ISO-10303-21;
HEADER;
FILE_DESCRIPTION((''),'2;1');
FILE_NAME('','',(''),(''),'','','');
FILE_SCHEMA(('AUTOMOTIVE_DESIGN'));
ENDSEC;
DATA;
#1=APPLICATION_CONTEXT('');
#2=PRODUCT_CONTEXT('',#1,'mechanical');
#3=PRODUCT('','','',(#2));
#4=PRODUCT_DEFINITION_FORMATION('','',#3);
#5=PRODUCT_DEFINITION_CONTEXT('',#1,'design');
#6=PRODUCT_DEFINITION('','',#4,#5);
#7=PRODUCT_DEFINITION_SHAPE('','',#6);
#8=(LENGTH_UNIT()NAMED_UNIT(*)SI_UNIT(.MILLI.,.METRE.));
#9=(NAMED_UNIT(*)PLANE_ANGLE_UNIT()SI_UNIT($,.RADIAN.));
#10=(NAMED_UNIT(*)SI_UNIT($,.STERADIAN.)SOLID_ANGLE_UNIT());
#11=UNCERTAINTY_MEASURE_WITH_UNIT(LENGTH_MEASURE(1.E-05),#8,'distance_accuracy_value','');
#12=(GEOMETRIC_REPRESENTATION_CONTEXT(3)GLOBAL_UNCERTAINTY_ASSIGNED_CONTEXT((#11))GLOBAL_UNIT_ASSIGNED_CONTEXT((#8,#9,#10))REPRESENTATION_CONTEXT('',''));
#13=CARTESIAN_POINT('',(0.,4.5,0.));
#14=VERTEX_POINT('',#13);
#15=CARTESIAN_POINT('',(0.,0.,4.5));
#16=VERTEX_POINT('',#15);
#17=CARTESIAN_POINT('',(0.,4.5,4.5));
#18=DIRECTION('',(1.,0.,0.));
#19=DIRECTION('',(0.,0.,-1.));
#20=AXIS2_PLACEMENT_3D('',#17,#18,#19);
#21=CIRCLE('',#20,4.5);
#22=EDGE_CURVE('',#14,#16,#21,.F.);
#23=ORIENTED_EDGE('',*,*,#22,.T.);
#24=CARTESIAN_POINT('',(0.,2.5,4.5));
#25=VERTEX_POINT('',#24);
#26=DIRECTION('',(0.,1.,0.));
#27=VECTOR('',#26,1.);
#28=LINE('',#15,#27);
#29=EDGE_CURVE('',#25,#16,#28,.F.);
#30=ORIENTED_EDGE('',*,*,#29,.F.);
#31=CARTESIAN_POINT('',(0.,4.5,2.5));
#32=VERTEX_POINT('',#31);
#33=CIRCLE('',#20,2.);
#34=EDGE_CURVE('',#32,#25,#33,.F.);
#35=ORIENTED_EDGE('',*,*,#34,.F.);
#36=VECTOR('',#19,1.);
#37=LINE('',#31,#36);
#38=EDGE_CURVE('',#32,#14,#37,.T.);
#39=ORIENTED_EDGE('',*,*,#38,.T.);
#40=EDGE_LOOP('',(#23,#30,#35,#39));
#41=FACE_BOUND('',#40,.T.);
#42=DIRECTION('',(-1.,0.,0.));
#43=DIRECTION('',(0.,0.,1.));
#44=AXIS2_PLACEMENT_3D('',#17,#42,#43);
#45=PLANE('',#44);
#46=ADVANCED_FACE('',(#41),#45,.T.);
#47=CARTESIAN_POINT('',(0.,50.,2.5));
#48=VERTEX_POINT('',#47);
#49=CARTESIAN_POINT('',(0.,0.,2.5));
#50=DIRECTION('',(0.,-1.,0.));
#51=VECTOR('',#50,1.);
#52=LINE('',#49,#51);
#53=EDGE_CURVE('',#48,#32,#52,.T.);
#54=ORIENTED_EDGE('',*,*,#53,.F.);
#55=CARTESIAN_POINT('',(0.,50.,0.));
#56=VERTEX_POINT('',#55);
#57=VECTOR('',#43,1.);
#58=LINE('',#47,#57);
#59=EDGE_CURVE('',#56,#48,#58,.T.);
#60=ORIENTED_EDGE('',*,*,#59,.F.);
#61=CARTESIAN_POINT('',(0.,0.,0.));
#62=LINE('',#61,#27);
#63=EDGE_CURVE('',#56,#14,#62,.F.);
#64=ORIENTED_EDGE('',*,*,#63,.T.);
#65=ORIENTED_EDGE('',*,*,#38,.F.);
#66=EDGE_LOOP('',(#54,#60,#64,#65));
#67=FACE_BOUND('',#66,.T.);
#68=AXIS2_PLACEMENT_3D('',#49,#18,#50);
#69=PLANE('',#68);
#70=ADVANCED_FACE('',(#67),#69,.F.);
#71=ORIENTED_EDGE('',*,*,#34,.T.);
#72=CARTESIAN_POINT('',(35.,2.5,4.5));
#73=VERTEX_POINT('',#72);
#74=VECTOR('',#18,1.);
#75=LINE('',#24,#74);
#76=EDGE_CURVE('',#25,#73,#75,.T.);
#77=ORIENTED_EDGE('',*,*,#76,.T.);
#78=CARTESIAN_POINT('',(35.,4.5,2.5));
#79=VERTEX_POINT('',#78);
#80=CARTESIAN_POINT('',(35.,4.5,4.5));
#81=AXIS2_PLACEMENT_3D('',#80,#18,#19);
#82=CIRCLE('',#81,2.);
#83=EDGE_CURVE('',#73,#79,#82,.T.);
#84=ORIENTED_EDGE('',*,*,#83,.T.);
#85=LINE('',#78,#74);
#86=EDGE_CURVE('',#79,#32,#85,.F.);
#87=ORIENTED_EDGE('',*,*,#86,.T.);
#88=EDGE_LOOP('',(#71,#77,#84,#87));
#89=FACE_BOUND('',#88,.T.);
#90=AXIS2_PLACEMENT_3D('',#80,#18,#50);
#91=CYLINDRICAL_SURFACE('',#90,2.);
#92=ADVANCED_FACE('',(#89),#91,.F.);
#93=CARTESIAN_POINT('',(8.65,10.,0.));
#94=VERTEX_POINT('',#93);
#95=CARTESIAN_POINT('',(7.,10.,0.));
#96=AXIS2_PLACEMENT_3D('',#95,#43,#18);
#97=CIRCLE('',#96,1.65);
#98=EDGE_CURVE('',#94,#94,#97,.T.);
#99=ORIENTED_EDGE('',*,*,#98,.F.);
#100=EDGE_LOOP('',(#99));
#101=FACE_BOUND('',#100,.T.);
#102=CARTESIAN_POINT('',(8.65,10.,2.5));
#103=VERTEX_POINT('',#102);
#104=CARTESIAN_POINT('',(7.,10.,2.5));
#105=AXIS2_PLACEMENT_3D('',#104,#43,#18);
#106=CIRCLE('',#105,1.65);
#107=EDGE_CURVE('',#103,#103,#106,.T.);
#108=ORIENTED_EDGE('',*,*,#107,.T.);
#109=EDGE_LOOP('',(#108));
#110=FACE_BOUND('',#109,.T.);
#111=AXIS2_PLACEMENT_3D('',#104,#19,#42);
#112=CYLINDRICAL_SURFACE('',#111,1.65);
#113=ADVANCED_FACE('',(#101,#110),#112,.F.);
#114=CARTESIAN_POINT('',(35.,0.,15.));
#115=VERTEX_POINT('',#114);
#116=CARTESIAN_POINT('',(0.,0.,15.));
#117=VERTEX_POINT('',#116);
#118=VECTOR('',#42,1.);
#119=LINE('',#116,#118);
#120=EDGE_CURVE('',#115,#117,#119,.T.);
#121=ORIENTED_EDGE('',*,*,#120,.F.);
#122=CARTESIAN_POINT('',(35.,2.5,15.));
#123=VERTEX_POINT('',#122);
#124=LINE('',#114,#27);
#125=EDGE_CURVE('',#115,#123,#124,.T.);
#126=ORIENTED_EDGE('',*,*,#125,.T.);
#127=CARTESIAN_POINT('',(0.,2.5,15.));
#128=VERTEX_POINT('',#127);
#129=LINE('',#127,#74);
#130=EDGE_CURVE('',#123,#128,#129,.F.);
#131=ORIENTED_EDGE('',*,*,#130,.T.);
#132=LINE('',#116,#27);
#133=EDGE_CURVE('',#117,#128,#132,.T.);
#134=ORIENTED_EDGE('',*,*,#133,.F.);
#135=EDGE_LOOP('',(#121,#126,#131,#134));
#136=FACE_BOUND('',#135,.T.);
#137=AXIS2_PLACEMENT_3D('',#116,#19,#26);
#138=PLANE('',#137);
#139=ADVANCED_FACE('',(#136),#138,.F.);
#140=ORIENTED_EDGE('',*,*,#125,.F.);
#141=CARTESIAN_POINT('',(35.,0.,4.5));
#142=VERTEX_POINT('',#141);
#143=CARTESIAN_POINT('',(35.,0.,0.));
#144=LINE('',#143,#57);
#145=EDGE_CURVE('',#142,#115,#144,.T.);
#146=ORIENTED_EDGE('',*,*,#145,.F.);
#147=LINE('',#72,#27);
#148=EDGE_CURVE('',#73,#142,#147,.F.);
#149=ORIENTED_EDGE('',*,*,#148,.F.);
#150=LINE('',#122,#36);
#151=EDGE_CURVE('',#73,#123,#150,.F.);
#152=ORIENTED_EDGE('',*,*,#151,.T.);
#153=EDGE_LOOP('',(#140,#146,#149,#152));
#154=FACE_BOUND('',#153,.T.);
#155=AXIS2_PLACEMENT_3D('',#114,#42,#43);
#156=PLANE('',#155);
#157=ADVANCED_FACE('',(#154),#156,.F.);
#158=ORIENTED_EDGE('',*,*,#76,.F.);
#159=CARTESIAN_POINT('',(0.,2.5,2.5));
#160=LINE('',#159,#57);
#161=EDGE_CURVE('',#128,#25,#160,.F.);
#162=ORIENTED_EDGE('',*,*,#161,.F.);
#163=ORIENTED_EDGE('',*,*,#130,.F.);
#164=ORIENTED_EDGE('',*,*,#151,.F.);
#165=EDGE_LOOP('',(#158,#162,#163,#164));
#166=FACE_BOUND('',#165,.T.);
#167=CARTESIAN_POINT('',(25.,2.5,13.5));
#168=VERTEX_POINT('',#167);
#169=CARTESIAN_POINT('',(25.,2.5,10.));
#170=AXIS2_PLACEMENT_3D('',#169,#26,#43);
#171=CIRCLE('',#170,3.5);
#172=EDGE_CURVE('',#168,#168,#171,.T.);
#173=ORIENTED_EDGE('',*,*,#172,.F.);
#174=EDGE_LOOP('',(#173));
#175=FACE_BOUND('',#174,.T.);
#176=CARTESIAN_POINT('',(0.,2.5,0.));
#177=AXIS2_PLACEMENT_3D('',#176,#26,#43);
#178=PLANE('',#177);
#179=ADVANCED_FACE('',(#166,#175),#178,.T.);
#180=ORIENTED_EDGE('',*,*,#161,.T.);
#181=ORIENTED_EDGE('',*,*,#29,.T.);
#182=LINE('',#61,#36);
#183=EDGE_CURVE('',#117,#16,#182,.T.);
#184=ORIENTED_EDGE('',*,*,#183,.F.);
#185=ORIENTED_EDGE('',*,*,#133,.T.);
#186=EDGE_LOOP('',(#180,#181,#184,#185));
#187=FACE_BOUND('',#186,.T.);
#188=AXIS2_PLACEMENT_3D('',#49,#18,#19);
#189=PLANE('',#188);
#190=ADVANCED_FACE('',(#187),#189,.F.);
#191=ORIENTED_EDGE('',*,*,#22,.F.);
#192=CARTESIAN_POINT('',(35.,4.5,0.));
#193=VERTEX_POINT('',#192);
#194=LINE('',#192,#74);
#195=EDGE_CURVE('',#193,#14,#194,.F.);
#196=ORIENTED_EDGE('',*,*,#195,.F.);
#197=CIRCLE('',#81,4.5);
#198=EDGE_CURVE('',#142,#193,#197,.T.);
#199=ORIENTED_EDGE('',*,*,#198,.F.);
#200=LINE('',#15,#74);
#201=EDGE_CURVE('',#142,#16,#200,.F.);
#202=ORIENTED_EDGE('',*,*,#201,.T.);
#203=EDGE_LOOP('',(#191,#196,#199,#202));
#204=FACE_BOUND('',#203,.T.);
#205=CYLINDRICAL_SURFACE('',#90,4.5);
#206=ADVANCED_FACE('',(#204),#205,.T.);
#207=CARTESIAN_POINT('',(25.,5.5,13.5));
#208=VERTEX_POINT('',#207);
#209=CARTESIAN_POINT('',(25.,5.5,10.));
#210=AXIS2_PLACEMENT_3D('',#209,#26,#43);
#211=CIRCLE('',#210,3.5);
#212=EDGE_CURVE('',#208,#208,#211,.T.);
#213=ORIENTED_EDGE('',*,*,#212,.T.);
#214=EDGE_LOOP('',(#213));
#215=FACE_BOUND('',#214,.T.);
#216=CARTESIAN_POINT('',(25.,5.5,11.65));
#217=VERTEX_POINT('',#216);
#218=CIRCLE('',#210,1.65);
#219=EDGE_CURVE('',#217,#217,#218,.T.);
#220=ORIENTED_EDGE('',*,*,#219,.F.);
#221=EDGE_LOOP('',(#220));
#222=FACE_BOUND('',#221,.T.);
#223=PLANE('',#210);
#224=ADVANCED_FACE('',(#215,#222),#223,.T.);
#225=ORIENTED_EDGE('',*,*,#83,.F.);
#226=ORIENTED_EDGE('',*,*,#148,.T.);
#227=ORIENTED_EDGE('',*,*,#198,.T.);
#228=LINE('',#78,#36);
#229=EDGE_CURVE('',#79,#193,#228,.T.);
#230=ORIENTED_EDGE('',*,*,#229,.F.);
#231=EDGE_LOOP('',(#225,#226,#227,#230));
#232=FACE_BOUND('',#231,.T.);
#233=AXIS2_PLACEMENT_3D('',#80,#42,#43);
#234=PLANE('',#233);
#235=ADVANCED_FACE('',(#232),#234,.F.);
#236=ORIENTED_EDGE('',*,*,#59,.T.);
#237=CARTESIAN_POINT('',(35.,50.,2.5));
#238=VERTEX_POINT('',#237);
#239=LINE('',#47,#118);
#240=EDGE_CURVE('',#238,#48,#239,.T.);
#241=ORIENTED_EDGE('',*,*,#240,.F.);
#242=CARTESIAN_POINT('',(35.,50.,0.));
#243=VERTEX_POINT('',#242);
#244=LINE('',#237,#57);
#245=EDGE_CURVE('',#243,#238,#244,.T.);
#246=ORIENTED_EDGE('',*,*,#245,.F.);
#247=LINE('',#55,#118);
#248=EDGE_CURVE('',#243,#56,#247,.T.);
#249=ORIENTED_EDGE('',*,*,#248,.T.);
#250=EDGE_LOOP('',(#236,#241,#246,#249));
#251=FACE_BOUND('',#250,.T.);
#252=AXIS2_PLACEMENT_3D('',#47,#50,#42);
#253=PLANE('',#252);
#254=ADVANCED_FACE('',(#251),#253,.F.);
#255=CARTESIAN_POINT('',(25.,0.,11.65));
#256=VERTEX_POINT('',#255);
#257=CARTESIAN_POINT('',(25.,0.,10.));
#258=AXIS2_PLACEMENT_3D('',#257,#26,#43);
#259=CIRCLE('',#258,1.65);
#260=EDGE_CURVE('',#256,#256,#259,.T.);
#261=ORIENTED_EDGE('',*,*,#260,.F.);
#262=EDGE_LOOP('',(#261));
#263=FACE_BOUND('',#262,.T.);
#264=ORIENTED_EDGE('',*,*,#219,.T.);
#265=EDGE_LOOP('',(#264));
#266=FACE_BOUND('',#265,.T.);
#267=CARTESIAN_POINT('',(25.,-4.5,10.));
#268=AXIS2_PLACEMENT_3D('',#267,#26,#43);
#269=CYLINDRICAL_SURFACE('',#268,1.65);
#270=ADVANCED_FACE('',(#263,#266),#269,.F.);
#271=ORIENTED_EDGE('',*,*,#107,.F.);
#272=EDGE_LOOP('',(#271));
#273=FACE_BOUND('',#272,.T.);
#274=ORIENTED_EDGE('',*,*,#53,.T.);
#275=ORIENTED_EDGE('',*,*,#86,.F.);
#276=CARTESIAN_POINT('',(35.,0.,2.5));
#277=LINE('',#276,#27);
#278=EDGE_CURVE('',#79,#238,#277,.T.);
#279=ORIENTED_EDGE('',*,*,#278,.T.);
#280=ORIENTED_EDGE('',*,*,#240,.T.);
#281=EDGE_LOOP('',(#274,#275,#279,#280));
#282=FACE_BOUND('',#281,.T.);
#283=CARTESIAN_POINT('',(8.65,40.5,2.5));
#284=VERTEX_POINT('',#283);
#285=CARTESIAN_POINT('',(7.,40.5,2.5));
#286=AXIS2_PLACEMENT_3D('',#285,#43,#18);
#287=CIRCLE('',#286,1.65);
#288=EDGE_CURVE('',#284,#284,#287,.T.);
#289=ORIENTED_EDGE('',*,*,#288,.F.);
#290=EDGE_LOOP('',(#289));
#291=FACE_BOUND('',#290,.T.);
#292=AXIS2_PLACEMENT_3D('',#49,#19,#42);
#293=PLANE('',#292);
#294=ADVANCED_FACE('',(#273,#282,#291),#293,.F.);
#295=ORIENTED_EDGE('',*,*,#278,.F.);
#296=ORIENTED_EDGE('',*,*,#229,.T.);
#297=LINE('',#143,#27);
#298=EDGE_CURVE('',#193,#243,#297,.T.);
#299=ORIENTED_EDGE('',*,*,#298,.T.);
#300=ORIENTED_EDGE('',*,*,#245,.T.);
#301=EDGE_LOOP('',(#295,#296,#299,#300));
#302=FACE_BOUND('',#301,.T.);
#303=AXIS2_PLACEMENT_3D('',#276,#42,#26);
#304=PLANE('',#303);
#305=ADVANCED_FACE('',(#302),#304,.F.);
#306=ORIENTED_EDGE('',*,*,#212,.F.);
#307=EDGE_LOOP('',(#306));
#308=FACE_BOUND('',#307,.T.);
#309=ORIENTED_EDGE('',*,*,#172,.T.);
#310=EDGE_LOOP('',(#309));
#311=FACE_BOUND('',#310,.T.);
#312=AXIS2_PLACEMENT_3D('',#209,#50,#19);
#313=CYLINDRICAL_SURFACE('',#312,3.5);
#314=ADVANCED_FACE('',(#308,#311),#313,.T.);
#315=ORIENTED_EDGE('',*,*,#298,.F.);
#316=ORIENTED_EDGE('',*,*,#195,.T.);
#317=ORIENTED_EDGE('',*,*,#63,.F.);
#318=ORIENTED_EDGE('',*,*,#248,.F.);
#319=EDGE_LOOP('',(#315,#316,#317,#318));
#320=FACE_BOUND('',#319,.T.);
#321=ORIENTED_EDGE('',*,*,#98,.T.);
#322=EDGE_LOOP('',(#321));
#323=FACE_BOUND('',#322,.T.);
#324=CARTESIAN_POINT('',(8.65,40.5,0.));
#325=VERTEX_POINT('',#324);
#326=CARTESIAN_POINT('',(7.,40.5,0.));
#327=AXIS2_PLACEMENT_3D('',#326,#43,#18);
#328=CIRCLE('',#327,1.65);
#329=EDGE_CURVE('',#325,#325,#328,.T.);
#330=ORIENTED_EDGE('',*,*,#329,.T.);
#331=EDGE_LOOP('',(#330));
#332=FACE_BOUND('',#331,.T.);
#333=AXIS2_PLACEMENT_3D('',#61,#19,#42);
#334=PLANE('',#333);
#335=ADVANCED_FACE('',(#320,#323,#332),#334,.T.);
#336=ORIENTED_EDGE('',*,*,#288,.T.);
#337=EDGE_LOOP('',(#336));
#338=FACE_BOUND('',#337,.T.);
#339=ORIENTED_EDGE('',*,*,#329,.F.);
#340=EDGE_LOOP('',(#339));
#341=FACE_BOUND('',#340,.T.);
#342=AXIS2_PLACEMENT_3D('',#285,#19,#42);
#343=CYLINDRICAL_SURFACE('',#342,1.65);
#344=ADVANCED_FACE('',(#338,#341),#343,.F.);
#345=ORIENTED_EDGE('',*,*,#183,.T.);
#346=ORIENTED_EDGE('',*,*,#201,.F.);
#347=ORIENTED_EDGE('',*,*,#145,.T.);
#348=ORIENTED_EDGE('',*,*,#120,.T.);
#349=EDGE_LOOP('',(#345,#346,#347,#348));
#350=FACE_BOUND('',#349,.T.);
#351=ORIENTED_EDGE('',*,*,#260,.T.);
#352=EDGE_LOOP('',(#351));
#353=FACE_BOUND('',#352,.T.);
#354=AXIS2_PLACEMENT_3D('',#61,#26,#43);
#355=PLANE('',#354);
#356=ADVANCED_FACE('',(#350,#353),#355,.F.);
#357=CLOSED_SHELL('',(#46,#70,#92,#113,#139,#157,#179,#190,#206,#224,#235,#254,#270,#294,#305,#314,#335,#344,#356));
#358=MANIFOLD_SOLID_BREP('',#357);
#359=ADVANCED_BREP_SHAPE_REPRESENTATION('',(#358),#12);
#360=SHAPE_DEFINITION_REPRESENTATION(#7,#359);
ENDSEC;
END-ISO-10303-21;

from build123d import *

# Parameters (mm, degrees)
SKETCH_1_W                       = 35
SKETCH_1_H                       = 50
EXTRUDE_1_DEPTH                  = 2.5
SKETCH_2_R                       = 1.65
CUT_EXTRUDE_1_DEPTH              = 10
SM_EDGE_FLANGE_2_STRIP_W         = 14
SM_EDGE_FLANGE_2_STRIP_H         = 2.5
SM_EDGE_FLANGE_2_STRIP_CUT_DEPTH = 35
SM_EDGE_FLANGE_2_DEPTH           = 35
SKETCH_19_R                      = 3.5
EXTRUDE_2_DEPTH                  = 3
SKETCH_20_R                      = 1.65
CUT_EXTRUDE_2_DEPTH              = 10


# Sheet-metal steps are written as plain solids
with BuildPart() as part:
    # 草图1 → 凸台-拉伸1 (new body)
    with BuildSketch(Plane.XY):
        with Locations((17.5, 25)):
            Rectangle(SKETCH_1_W, SKETCH_1_H)
    extrude(amount=EXTRUDE_1_DEPTH)

    # 草图2 → 切除-拉伸1 (cut)
    with BuildSketch(Plane.XY.offset(2.5)):
        with Locations((7, 40.5)):
            Circle(SKETCH_2_R)
        with Locations((7, 10)):
            Circle(SKETCH_2_R)
    extrude(amount=-CUT_EXTRUDE_1_DEPTH, mode=Mode.SUBTRACT)

    # 边线-法兰2 strip (across the edge) → 边线-法兰2 strip cut (cut)
    with BuildSketch(Plane(origin=(0, 0, 2.5), x_dir=(0, 1, 0), z_dir=(1, 0, 0))):
        with Locations((-2.5, -1.25)):
            Rectangle(SM_EDGE_FLANGE_2_STRIP_W, SM_EDGE_FLANGE_2_STRIP_H)
    extrude(amount=SM_EDGE_FLANGE_2_STRIP_CUT_DEPTH, mode=Mode.SUBTRACT)

    # 边线-法兰2 section (across the edge) → 边线-法兰2 (add)
    with BuildSketch(Plane(origin=(0, 0, 2.5), x_dir=(0, 1, 0), z_dir=(1, 0, 0))):
        with BuildLine():
            Line((0, 2), (0, 12.5))
            Line((0, 12.5), (2.5, 12.5))
            Line((2.5, 12.5), (2.5, 2))
            ThreePointArc((2.5, 2), (3.085786438, 0.585786438), (4.5, 0))
            Line((4.5, 0), (4.5, -2.5))
            ThreePointArc((4.5, -2.5), (1.318019485, -1.181980515), (0, 2))
        make_face()
    extrude(amount=SM_EDGE_FLANGE_2_DEPTH)

    # 草图19 → 凸台-拉伸2 (add)
    with BuildSketch(Plane(origin=(0, 2.5, 0), x_dir=(1, 0, 0), z_dir=(0, 1, 0))):
        with Locations(Location((25, -10, 0), (0, 0, 270))):
            Circle(SKETCH_19_R)
    extrude(amount=EXTRUDE_2_DEPTH)

    # 草图20 → 切除-拉伸2 (cut)
    with BuildSketch(Plane(origin=(0, 5.5, 0), x_dir=(1, 0, 0), z_dir=(0, 1, 0))):
        with Locations(Location((25, -10, 0), (0, 0, 270))):
            Circle(SKETCH_20_R)
    extrude(amount=-CUT_EXTRUDE_2_DEPTH, mode=Mode.SUBTRACT)


solid = part.part
